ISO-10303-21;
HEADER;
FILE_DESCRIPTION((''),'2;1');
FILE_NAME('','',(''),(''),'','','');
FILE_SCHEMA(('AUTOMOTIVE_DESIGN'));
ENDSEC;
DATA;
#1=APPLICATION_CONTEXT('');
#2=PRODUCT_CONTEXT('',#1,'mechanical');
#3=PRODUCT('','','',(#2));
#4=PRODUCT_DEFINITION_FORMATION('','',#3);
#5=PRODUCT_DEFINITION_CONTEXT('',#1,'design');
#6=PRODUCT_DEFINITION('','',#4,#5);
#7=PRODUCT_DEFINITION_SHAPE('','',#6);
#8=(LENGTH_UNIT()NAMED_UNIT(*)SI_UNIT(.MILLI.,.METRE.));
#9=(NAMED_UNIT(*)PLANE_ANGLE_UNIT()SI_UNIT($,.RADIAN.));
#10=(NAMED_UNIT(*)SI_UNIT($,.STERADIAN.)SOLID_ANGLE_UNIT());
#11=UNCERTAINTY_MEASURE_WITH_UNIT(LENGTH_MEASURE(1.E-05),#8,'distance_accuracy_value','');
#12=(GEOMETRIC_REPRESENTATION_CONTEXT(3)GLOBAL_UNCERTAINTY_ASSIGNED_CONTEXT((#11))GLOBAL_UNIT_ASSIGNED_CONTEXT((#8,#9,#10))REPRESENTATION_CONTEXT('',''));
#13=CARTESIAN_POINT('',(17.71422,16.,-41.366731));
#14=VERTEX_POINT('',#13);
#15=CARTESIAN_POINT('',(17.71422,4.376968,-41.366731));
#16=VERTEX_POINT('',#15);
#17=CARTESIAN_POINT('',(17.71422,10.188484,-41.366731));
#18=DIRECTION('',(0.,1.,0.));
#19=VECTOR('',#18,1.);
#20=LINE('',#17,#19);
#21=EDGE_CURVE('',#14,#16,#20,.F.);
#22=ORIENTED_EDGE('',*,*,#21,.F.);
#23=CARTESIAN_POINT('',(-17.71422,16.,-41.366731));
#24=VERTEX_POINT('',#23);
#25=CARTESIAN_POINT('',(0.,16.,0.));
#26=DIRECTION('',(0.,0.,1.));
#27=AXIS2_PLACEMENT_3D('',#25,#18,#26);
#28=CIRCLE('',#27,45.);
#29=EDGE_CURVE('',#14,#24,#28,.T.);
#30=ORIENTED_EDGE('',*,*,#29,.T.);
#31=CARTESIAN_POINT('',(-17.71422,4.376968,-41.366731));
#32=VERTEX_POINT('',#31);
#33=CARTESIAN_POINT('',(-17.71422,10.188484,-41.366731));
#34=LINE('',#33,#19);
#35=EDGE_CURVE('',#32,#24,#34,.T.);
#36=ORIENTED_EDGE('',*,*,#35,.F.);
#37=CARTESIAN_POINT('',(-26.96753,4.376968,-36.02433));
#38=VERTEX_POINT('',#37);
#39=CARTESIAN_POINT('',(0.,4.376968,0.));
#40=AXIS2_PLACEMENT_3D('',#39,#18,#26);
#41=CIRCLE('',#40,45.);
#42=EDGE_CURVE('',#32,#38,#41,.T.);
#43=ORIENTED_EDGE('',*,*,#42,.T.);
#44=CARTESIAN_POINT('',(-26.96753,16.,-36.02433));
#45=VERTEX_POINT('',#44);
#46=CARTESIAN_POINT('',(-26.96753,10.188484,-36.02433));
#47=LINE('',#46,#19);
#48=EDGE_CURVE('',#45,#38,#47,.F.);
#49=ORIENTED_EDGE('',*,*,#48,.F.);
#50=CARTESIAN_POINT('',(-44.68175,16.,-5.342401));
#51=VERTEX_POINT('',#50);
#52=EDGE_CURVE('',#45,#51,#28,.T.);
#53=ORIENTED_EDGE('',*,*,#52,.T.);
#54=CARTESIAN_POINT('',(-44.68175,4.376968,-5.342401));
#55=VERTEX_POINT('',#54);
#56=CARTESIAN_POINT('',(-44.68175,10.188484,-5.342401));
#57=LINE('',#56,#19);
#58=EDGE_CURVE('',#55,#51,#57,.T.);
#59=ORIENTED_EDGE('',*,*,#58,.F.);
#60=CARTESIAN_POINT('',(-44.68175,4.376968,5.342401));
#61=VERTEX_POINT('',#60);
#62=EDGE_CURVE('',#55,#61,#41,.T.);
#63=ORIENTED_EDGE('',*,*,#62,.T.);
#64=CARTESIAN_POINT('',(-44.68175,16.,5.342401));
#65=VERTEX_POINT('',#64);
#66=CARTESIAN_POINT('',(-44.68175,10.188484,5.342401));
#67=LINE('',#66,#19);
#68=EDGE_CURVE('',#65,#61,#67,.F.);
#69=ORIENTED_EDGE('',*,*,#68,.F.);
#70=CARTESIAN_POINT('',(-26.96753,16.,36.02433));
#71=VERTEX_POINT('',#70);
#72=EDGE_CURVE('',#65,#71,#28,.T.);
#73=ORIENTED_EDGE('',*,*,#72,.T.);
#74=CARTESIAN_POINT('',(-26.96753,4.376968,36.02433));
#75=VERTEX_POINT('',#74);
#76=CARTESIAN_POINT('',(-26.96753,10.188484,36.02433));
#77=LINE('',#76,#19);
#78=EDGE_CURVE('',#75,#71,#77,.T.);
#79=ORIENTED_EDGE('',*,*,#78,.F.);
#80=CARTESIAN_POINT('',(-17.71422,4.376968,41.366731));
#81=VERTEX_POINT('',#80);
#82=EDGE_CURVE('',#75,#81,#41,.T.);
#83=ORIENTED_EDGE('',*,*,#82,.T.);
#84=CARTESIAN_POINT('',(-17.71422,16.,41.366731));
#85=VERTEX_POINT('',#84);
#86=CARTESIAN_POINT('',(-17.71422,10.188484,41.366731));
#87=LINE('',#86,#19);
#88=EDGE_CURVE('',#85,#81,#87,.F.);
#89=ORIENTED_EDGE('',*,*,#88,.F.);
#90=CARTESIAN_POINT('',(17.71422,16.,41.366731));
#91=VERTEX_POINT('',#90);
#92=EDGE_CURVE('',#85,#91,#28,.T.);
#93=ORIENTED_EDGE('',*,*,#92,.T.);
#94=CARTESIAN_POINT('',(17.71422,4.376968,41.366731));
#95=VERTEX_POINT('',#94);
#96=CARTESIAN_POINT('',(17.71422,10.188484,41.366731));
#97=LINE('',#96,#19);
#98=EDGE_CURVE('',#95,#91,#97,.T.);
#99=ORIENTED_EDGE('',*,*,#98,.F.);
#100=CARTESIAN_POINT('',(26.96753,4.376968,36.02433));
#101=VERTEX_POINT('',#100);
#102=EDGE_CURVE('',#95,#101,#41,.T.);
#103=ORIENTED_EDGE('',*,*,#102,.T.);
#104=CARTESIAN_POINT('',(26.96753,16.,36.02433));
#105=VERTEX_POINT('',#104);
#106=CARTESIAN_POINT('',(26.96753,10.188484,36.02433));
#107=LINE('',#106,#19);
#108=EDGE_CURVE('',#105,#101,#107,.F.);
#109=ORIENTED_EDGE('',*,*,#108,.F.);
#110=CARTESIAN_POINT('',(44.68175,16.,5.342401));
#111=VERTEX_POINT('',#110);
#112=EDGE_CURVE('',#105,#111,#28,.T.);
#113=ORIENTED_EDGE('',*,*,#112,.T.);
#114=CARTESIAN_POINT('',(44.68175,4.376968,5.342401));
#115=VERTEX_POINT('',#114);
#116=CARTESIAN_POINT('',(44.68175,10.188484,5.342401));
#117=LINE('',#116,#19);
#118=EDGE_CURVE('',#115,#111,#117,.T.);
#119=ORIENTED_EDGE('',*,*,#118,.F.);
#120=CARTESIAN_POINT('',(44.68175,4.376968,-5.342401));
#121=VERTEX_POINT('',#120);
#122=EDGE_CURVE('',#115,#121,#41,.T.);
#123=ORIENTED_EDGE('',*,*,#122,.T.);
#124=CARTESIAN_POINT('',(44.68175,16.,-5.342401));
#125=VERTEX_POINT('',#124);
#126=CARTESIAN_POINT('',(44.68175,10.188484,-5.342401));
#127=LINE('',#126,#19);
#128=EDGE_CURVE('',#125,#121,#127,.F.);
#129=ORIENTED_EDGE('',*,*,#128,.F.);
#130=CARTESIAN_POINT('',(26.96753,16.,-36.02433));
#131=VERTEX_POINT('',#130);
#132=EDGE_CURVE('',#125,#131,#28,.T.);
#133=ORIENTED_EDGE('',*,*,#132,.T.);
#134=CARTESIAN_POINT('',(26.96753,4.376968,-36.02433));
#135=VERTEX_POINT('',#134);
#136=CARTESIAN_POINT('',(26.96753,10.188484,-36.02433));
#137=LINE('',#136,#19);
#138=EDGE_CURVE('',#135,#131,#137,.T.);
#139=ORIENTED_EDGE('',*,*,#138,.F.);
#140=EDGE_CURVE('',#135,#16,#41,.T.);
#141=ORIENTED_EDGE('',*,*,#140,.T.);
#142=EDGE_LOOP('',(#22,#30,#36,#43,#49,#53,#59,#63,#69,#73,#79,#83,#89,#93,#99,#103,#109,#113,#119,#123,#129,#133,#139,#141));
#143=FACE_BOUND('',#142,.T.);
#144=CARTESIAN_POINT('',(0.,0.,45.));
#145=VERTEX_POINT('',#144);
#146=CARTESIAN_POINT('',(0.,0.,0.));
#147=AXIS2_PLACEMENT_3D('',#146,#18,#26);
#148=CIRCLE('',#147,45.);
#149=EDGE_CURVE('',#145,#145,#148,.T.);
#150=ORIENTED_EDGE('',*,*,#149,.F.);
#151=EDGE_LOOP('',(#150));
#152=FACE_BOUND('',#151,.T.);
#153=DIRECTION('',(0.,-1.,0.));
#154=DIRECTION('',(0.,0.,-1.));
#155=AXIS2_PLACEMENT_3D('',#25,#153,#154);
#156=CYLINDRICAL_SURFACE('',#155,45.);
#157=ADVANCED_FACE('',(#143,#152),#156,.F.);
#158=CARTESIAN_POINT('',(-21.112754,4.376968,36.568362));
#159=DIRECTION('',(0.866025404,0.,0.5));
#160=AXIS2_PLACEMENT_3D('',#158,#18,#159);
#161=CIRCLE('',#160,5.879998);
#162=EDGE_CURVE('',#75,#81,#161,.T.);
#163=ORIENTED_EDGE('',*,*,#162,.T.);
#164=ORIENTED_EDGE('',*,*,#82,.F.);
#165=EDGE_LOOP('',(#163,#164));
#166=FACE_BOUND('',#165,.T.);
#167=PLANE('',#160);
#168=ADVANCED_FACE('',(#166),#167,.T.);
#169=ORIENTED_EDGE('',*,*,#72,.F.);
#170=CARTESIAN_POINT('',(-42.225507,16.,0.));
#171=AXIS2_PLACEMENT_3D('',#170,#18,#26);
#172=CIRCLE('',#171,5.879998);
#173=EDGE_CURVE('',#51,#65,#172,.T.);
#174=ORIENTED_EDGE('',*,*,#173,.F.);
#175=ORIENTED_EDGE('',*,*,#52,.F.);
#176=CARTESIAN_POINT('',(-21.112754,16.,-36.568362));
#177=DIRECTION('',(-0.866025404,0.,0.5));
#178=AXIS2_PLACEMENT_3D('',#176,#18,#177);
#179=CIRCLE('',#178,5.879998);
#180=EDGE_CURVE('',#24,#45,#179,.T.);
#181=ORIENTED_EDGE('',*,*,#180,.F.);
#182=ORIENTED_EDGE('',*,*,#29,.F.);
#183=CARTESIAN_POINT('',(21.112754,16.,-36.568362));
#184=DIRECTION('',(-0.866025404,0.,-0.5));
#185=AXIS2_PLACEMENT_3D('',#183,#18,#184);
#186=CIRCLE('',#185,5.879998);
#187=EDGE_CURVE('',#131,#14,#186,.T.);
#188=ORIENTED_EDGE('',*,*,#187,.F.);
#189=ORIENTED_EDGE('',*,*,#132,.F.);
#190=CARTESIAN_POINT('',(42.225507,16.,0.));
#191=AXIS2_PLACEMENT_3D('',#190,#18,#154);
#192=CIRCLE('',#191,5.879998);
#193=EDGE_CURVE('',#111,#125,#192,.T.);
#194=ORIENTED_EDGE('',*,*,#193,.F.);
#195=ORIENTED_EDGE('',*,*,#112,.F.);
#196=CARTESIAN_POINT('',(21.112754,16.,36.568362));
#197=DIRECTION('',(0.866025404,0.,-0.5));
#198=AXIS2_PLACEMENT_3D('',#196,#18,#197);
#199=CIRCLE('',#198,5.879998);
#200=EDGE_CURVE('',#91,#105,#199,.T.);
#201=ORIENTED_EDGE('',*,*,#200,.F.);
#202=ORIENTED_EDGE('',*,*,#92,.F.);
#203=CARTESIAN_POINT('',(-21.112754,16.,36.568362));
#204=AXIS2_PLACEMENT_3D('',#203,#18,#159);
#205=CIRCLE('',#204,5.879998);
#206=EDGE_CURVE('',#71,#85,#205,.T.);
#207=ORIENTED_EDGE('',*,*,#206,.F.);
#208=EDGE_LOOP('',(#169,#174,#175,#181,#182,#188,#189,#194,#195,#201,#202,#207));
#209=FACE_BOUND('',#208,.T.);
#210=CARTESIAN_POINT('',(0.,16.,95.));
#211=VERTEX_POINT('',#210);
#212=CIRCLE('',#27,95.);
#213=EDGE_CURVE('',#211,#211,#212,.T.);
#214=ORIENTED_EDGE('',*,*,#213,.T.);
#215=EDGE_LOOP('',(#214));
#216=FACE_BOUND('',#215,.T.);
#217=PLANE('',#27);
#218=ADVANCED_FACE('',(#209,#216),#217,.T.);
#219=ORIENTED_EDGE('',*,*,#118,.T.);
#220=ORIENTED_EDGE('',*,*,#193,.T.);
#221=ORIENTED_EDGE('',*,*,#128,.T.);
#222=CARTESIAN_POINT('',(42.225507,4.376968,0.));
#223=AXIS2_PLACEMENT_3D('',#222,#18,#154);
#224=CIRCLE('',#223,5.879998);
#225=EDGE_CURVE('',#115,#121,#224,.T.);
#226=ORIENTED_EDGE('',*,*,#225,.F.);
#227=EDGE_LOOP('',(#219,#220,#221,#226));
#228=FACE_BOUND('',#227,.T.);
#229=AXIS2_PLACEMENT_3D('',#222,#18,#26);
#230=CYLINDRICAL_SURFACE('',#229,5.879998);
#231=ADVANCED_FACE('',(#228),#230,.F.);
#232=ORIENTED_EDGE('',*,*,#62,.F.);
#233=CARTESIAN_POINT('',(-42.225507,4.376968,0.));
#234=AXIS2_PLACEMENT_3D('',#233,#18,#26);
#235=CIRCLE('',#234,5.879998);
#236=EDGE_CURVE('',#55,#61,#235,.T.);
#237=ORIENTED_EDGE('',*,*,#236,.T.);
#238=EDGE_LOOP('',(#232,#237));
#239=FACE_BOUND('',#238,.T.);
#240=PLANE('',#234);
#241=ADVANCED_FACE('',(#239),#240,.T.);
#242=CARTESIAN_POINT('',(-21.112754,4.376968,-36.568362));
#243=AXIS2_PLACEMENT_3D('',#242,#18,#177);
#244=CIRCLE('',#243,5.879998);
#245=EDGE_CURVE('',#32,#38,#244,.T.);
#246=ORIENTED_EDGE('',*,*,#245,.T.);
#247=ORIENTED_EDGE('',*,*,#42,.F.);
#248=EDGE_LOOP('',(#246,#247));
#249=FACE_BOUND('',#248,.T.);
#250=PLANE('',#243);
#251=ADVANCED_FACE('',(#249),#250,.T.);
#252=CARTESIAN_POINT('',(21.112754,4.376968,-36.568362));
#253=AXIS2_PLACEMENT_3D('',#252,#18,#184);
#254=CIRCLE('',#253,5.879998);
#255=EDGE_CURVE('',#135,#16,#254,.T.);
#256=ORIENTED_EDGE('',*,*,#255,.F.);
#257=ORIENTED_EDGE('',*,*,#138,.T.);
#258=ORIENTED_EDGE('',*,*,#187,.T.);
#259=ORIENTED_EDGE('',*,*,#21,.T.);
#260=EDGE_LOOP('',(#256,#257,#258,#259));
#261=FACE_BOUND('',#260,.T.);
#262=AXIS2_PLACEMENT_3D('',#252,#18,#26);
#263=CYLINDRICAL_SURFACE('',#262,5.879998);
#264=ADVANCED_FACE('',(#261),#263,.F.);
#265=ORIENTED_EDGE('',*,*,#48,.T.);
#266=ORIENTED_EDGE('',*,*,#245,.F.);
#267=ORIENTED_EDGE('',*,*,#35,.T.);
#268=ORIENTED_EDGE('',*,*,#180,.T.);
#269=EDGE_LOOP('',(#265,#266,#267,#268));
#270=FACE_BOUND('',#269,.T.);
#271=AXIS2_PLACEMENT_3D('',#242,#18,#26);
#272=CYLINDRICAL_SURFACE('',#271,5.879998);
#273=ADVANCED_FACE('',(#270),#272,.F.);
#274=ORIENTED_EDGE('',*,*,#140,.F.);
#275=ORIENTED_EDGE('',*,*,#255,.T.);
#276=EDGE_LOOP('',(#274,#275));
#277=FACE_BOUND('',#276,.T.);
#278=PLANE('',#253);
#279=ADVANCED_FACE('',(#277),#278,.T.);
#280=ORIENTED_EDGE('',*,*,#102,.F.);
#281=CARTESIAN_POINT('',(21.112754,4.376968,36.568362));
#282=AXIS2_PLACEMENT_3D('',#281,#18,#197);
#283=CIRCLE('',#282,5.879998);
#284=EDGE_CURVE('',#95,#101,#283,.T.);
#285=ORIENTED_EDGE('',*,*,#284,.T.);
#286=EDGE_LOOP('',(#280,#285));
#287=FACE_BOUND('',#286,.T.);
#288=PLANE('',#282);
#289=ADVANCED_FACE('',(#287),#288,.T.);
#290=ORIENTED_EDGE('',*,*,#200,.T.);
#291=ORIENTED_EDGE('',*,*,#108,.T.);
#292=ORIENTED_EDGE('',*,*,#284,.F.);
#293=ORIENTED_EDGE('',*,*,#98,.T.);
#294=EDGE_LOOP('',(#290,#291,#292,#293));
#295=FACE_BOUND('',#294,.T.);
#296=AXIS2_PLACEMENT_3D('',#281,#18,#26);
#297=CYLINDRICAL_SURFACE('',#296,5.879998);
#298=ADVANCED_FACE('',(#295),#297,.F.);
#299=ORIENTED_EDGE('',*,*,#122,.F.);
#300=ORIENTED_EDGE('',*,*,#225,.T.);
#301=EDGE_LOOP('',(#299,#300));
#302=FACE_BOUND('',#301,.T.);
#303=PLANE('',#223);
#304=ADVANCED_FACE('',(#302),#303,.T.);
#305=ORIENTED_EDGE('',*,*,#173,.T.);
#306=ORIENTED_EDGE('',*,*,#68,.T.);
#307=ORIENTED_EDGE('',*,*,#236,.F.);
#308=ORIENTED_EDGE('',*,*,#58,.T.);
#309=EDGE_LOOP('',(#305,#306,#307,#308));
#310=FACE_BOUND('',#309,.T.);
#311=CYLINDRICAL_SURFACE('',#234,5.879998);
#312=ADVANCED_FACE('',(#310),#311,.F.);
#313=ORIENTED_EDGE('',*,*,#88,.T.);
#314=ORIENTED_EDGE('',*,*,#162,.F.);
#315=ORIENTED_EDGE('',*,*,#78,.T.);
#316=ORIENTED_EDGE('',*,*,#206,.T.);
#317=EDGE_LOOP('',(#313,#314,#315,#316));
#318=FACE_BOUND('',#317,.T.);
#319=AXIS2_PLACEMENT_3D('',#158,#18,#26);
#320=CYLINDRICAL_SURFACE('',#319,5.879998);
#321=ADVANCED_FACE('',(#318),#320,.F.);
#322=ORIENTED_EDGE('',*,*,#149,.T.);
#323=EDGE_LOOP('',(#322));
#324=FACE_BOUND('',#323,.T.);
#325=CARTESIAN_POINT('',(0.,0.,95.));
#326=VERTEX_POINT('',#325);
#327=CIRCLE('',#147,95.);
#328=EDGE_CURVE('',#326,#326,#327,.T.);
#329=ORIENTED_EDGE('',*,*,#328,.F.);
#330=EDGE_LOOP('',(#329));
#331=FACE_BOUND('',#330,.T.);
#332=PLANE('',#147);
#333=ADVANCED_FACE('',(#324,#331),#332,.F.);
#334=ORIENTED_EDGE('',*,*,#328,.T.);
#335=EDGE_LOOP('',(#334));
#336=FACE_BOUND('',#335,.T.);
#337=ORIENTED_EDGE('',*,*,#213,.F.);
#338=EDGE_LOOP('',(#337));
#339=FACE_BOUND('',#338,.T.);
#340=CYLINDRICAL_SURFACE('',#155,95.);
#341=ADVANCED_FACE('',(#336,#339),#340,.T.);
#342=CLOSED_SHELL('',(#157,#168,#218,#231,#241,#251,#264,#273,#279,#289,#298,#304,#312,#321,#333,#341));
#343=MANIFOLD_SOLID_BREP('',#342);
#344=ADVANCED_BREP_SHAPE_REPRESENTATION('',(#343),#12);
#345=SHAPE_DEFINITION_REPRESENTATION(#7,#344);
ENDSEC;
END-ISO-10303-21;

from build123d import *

# Parameters (mm, degrees)
SKETCH1_R           = 95
BOSS_EXTRUDE1_DEPTH = 16
SKETCH2_R           = 45
CUT_EXTRUDE1_DEPTH  = 136.299667405
SKETCH3_R           = 5.879997647
CUT_EXTRUDE2_DEPTH  = 11.623032419
CIRPATTERN1_COUNT   = 6


with BuildPart() as part:
    # Sketch1 → Boss-Extrude1 (new body)
    with BuildSketch(Plane(origin=(0, 0, 0), x_dir=(1, 0, 0), z_dir=(0, 1, 0))):
        Circle(SKETCH1_R)
    extrude(amount=BOSS_EXTRUDE1_DEPTH)

    # Sketch2 → Cut-Extrude1 (cut, through all)
    with BuildSketch(Plane(origin=(0, 0, 0), x_dir=(1, 0, 0), z_dir=(0, 1, 0))):
        Circle(SKETCH2_R)
    extrude(amount=CUT_EXTRUDE1_DEPTH, mode=Mode.SUBTRACT)

    # Sketch3 → Cut-Extrude2 (cut)
    with BuildSketch(Plane(origin=(0, 16, 0), x_dir=(1, 0, 0), z_dir=(0, 1, 0))):
        with Locations((-42.22550746, 0)):
            Circle(SKETCH3_R)
    cut_extrude2 = extrude(amount=-CUT_EXTRUDE2_DEPTH, mode=Mode.SUBTRACT)

    # CirPattern1: Cut-Extrude2 ×6 about axis
    cirpattern1_axis = Axis((0, 0, 0), (0, 1, 0))
    for i in range(1, CIRPATTERN1_COUNT):
        add(cut_extrude2.rotate(cirpattern1_axis, i * 360 / CIRPATTERN1_COUNT), mode=Mode.SUBTRACT)


solid = part.part
